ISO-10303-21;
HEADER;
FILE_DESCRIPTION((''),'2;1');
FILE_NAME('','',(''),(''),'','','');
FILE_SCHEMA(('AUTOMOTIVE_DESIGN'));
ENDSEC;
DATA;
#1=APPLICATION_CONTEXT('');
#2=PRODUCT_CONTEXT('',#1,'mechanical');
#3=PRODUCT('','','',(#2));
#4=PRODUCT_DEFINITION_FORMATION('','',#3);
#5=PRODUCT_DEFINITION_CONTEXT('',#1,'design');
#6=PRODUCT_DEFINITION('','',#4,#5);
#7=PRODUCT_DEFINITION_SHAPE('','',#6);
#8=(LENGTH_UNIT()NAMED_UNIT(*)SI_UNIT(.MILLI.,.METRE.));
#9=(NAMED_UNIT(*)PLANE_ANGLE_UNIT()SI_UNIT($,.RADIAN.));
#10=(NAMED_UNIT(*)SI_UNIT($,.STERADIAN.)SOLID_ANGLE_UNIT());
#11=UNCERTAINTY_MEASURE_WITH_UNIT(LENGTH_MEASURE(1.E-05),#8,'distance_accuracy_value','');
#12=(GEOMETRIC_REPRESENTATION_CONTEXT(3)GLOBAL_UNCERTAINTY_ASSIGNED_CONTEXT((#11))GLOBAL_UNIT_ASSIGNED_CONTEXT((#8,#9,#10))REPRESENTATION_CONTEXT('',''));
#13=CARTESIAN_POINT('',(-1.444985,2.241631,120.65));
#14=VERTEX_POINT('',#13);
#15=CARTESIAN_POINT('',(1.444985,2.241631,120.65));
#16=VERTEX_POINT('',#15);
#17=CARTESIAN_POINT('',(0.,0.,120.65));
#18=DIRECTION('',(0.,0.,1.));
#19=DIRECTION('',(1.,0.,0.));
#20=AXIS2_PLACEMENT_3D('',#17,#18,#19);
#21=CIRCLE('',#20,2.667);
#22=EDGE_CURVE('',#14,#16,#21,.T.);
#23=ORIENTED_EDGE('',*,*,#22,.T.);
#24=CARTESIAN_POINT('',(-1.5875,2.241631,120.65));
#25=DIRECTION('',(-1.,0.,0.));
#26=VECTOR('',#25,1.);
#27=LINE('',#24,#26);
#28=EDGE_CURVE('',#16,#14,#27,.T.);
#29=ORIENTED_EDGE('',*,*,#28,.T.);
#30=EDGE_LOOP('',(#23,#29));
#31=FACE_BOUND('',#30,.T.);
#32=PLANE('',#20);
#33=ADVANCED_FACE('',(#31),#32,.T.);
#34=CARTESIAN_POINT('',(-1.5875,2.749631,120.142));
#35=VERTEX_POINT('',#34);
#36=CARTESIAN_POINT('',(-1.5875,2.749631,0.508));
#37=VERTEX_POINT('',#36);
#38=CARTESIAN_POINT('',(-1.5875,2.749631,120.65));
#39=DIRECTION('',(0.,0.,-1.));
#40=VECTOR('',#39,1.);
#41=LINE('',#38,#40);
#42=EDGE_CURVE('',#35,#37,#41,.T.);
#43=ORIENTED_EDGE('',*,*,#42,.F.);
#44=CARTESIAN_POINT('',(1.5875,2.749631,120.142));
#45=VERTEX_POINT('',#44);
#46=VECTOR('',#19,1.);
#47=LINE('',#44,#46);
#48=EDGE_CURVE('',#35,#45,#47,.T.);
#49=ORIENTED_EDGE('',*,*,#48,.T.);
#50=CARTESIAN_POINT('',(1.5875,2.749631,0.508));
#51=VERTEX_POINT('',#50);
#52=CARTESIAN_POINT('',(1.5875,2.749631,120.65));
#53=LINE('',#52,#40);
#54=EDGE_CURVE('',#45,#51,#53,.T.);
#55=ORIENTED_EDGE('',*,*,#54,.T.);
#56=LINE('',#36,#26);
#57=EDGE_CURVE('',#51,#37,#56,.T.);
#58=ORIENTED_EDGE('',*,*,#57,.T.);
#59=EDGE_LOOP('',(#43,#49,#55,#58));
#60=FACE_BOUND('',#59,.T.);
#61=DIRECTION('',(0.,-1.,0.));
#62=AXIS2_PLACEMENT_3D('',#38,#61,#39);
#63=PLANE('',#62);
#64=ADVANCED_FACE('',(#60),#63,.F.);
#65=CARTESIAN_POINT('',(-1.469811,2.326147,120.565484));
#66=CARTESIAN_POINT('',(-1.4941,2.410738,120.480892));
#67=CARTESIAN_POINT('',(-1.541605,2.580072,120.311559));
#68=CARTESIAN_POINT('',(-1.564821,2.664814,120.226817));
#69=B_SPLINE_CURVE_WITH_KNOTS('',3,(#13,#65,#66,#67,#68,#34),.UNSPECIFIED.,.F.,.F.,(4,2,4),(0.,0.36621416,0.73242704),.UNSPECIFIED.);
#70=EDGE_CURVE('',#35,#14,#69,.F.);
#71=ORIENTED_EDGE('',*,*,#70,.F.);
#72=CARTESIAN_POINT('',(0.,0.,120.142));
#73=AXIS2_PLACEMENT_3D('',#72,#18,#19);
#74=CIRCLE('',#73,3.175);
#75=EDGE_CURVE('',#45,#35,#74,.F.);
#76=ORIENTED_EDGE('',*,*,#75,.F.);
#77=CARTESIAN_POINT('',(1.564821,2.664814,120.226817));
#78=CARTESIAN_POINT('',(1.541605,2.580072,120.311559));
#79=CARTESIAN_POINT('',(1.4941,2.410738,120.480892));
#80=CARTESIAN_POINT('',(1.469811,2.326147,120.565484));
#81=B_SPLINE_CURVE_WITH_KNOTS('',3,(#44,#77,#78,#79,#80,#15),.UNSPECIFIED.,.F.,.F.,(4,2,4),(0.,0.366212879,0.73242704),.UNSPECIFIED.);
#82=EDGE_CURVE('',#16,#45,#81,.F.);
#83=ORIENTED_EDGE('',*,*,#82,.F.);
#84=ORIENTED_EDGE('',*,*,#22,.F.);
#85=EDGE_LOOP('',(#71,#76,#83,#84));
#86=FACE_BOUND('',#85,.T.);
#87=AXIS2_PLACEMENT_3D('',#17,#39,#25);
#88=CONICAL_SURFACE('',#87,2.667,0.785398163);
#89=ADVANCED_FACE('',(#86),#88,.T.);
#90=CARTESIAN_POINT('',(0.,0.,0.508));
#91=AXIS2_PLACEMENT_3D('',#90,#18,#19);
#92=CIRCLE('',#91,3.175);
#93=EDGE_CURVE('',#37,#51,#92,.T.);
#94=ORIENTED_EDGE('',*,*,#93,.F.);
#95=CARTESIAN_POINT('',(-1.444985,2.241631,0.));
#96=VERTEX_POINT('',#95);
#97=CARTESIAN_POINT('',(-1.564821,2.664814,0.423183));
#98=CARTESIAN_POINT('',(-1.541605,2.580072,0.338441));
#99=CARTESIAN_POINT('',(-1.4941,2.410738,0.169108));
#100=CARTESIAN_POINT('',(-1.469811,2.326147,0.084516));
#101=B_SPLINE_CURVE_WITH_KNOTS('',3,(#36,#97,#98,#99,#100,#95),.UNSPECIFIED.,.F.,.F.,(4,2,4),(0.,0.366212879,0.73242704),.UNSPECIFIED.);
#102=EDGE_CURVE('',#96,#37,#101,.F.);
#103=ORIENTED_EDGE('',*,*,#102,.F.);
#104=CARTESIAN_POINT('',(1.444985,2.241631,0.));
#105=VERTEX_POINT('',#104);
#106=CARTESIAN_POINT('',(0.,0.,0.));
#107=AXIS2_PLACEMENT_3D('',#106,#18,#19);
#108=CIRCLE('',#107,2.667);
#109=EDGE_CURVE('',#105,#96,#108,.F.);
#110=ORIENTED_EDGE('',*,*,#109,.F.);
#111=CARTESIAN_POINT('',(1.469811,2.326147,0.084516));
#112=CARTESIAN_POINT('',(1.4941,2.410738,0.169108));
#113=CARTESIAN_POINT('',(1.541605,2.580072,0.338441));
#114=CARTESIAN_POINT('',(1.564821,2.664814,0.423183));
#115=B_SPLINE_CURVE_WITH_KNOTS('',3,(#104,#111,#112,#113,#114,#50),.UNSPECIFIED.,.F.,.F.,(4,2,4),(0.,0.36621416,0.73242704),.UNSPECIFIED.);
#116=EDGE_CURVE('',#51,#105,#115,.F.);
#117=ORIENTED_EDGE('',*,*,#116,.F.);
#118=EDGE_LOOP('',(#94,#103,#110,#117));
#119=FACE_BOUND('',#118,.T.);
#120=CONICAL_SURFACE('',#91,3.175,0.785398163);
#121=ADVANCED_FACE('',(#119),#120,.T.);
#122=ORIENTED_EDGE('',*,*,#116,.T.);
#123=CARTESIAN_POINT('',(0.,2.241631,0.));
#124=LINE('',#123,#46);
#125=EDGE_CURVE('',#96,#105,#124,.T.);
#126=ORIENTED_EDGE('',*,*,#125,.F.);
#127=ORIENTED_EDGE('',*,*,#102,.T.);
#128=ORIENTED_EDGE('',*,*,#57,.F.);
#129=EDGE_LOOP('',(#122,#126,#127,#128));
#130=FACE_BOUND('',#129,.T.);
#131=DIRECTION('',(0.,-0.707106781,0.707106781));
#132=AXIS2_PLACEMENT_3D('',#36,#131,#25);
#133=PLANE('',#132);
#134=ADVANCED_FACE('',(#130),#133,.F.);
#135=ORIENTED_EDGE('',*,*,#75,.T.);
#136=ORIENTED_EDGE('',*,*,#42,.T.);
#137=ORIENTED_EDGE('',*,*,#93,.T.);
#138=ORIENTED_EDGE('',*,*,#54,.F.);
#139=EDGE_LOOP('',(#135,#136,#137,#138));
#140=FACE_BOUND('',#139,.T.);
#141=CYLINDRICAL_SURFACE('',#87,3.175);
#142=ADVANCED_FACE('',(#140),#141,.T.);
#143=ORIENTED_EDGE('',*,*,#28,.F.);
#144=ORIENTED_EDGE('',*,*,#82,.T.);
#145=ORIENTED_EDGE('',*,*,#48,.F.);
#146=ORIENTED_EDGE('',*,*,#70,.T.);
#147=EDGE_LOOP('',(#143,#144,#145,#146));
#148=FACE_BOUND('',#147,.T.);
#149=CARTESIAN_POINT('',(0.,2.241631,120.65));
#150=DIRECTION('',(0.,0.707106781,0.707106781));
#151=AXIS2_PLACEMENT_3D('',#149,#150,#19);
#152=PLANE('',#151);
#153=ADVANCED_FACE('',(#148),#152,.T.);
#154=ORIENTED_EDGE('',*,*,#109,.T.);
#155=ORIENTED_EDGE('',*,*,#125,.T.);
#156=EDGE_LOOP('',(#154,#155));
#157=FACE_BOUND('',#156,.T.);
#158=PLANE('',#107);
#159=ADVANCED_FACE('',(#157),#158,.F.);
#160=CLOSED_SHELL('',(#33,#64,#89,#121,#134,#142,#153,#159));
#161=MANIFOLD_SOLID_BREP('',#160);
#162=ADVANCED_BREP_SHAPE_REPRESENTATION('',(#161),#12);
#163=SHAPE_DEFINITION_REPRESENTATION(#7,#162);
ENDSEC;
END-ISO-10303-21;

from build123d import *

# Parameters (mm, degrees)
BOSS_EXTRUDE1_DEPTH = 120.65
CHAMFER1_SIZE       = 0.508


with BuildPart() as part:
    # Sketch1 → Boss-Extrude1 (new body)
    with BuildSketch(Plane.XY):
        with BuildLine():
            Line((-1.5875, 2.749630657), (1.5875, 2.749630657))
            ThreePointArc((1.5875, 2.749630657), (0, -3.175), (-1.5875, 2.749630657))
        make_face()
    extrude(amount=BOSS_EXTRUDE1_DEPTH)

    # Chamfer1
    # the kernel refuses this chamfer: 0.508 mm, written as the material it takes off along each edge
    with BuildSketch(Plane(origin=(-2.893914958, 2.749630657, 0), x_dir=(0, 0.027495876610586435, 0.9996219169112968), z_dir=(1, 0, 0))) as chamfer1_piece_1:
        Polygon((CHAMFER1_SIZE * 0.999621916911, CHAMFER1_SIZE * 0.0274958766106), (-CHAMFER1_SIZE * 0.0274958766106, CHAMFER1_SIZE * 0.999621916911), (0, 0), align=None)
    extrude(amount=5.787829916, mode=Mode.SUBTRACT)
    with BuildSketch(Plane(origin=(0, 0, 0), x_dir=(0.11006425826792274, 0.9939244735149306, 0), z_dir=(-0.9939244735149306, 0.11006425826792274, 0))) as chamfer1_piece_2:
        Polygon((3.175, -CHAMFER1_SIZE), (3.175 - CHAMFER1_SIZE, 0), (3.175, 0), align=None)
    revolve(axis=Axis((0, 0, 0), (0, 0, -1)), revolution_arc=347.361960422, mode=Mode.SUBTRACT)
    with BuildSketch(Plane(origin=(0, 0, 120.65), x_dir=(0.11006425826792288, 0.9939244735149306, 0), z_dir=(-0.9939244735149306, 0.11006425826792288, 0))) as chamfer1_piece_3:
        Polygon((3.175, CHAMFER1_SIZE), (3.175 - CHAMFER1_SIZE, 0), (3.175, 0), align=None)
    revolve(axis=Axis((0, 0, 120.65), (0, 0, -1)), revolution_arc=347.361960422, mode=Mode.SUBTRACT)
    with BuildSketch(Plane(origin=(-2.893914958, 2.749630657, 120.65), x_dir=(0, 0.027495876610587017, -0.9996219169112968), z_dir=(1, 0, 0))) as chamfer1_piece_4:
        Polygon((CHAMFER1_SIZE * 0.999621916911, -CHAMFER1_SIZE * 0.0274958766106), (-CHAMFER1_SIZE * 0.0274958766106, -CHAMFER1_SIZE * 0.999621916911), (0, 0), align=None)
    extrude(amount=5.787829916, mode=Mode.SUBTRACT)


solid = part.part
